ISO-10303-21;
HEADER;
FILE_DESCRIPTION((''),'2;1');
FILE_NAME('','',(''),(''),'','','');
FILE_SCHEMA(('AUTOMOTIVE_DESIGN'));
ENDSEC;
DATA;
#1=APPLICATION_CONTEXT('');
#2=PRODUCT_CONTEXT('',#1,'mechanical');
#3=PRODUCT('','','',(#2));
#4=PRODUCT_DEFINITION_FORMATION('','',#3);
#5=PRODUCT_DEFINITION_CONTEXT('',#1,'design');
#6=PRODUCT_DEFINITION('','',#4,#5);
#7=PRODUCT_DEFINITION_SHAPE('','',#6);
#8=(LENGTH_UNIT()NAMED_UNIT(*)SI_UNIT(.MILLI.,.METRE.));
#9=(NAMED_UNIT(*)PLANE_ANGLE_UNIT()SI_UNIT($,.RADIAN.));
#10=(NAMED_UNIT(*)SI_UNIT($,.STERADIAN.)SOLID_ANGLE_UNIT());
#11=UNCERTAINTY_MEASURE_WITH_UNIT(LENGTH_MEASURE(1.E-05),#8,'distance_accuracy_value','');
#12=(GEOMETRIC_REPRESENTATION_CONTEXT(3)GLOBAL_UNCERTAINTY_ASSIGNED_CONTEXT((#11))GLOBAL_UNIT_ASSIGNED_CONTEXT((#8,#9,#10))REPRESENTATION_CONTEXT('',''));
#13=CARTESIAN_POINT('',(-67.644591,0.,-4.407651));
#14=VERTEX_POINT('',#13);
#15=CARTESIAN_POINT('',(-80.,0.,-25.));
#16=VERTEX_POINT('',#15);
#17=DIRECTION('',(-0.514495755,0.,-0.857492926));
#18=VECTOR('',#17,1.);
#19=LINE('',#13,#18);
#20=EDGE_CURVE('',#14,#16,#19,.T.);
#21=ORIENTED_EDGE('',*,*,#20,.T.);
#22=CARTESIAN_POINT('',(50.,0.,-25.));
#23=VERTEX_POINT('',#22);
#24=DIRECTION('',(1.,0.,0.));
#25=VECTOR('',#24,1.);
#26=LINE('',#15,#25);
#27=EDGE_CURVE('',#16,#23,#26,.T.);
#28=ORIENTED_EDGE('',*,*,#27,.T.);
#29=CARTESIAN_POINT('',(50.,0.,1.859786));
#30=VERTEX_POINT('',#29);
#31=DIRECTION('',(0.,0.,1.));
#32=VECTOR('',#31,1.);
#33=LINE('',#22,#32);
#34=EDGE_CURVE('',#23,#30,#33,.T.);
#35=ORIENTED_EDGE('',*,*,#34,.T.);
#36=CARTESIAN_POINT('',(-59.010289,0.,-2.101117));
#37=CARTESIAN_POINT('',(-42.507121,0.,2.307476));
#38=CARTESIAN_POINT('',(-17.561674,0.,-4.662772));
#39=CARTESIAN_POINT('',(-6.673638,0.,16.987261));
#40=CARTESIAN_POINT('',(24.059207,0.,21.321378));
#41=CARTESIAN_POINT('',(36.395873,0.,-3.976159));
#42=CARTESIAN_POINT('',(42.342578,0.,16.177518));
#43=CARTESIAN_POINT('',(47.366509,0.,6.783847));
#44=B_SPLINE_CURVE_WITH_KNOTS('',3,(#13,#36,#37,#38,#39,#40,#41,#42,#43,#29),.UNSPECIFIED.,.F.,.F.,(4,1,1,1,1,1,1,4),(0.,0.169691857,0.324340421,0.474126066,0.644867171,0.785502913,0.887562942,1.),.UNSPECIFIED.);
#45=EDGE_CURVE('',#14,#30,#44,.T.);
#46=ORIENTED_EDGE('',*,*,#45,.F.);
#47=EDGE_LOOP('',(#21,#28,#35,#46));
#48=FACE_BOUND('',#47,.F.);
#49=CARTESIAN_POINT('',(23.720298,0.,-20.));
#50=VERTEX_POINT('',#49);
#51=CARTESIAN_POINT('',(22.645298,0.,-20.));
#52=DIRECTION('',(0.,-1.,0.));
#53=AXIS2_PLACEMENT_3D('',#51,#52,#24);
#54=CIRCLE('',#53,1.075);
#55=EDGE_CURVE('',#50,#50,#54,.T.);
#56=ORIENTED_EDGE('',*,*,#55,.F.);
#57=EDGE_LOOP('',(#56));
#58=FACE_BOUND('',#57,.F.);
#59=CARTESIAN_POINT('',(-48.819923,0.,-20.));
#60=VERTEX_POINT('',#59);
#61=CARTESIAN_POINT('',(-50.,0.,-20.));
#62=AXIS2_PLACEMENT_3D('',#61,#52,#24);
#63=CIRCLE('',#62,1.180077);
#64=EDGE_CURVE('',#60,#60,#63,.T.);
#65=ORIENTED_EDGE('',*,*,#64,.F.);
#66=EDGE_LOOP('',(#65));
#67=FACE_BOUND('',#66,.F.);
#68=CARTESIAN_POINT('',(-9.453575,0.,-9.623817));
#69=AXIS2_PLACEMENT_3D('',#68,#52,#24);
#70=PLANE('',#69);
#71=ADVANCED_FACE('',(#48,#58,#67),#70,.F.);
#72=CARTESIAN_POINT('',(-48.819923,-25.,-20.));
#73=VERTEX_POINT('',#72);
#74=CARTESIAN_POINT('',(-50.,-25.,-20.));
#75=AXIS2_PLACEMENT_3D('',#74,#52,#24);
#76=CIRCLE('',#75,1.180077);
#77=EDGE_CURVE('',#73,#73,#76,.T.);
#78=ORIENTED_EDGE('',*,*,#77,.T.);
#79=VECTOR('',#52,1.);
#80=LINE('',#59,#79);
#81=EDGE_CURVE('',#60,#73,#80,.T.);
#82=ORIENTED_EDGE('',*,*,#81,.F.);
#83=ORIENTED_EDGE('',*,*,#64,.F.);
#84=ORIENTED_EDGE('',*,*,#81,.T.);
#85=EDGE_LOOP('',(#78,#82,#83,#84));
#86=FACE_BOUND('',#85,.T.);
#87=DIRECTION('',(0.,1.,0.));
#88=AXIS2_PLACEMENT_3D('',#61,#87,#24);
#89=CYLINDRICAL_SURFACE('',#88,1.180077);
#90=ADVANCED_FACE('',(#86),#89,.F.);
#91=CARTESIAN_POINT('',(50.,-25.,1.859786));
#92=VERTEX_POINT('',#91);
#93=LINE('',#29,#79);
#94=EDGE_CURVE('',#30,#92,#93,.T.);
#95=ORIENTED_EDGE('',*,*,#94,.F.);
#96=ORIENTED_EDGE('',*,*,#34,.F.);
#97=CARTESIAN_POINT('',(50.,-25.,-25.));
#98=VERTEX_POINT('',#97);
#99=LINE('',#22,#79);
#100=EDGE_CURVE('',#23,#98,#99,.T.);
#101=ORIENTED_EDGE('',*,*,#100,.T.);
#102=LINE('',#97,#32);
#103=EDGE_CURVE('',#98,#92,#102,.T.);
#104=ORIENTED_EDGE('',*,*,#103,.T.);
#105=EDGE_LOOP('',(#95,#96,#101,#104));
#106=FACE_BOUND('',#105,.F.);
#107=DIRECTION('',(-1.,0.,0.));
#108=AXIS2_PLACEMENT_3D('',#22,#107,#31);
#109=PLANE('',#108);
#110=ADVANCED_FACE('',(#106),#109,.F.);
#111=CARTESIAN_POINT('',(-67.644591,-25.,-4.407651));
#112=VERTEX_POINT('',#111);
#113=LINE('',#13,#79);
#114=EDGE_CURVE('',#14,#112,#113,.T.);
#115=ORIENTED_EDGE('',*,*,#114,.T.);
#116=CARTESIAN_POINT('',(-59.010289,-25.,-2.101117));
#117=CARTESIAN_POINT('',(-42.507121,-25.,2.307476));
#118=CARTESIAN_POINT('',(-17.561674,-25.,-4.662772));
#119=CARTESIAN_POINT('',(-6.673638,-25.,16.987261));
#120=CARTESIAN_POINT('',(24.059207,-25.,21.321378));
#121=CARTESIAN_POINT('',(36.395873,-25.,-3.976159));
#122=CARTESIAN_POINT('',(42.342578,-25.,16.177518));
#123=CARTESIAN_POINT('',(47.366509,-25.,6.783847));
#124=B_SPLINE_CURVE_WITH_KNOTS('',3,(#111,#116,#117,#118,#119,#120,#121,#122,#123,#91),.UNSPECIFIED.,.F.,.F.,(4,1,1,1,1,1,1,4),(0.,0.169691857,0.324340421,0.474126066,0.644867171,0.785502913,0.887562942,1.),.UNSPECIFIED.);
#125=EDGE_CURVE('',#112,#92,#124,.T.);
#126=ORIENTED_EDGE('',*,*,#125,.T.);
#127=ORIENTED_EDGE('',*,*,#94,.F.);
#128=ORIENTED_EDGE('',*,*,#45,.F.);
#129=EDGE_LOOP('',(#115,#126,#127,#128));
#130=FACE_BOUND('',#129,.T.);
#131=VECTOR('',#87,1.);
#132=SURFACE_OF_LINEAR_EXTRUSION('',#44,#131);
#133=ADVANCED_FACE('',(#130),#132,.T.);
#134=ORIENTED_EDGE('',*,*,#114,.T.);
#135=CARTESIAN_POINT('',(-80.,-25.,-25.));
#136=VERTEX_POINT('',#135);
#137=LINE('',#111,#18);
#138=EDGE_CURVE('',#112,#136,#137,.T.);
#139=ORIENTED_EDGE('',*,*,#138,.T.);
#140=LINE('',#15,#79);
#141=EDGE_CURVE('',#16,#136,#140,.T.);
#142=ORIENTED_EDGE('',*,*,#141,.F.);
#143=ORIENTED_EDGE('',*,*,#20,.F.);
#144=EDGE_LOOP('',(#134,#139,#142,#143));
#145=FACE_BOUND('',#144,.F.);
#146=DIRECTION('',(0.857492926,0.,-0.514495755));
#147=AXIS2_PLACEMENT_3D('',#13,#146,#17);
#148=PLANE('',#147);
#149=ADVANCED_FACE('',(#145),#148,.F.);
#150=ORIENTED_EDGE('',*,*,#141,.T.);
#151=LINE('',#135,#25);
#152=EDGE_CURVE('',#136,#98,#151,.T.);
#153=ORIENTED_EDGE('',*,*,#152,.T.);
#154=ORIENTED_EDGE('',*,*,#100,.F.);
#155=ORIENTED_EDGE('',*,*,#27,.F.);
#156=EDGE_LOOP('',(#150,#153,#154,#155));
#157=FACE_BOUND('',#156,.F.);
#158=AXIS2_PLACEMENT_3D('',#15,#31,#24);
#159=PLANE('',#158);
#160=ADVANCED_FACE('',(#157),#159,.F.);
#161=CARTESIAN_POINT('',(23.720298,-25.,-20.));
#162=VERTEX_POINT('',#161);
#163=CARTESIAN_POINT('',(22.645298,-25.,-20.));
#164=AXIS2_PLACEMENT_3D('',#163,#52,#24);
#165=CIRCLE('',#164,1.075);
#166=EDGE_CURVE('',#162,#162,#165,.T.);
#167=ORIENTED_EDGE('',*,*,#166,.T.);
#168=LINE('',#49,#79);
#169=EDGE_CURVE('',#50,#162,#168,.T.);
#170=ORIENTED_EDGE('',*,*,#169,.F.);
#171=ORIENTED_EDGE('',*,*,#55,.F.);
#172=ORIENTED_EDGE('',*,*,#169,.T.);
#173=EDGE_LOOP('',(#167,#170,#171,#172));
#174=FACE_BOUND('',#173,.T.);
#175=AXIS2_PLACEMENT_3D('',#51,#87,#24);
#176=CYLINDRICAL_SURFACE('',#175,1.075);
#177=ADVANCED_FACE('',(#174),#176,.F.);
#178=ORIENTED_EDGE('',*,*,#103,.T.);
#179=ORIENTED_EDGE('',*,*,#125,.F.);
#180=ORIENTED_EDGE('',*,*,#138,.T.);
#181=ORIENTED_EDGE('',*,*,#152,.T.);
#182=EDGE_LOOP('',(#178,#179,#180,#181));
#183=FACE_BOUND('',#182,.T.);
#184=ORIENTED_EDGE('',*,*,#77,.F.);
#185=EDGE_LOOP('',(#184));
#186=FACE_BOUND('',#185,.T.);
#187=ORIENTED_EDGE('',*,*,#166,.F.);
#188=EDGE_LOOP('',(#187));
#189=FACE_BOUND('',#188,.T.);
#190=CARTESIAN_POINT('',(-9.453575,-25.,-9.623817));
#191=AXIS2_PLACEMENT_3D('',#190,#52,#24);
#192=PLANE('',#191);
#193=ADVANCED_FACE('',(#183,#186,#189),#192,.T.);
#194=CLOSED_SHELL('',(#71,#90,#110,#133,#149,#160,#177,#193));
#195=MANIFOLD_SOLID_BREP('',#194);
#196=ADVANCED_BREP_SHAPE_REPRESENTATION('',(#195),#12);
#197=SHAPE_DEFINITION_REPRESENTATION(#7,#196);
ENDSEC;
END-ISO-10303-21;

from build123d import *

# Parameters (mm, degrees)
F0_R     = 1.180077203
F0_R_2   = 1.075
F1_DEPTH = 25
F2_DEPTH = 25
F3_DEPTH = 156


# Not quite as in the source:
# - an extrude ends at something that could not be found from the text; its depth is read off the source's solid


with BuildPart() as f1:
    # F0 (on Front) → F1 (new body)
    with BuildSketch(Plane.XZ):
        with BuildLine():
            Line((-80, -25), (-50, -25))
            Line((-50, -25), (22.6452976465, -25))
            Line((22.6452976465, -25), (50, -25))
            Line((50, -25), (50, 1.8597864546))
            add(Edge.make_bspline(
                [(-67.6445906489, -4.4076510815), (-59.0102886259, -2.1011168124), (-42.5071210423, 2.3074759699), (-17.5616744307, -4.6627715865), (-6.6736378345, 16.9872606787), (24.059206598, 21.3213776549), (36.3958726575, -3.9761585615), (42.342577975, 16.1775178738), (47.3665093795, 6.7838472254), (50, 1.8597864546)],
                knots=[0, 0, 0, 0, 0.1696918572, 0.3243404215, 0.4741260658, 0.6448671709, 0.7855029125, 0.8875629417, 1, 1, 1, 1], degree=3))
            Line((-67.6445906489, -4.4076510815), (-80, -25))
        make_face()
        with Locations((-50, -20)):
            Circle(F0_R, mode=Mode.SUBTRACT)
        with Locations((22.6452976465, -20)):
            Circle(F0_R_2, mode=Mode.SUBTRACT)
    extrude(amount=F1_DEPTH)

    # F0 (on Front) → F2 (join)
    with BuildSketch(Plane.XZ):
        with BuildLine():
            Line((-80, -25), (-50, -25))
            Line((-50, -25), (22.6452976465, -25))
            Line((22.6452976465, -25), (50, -25))
            Line((50, -25), (50, 1.8597864546))
            add(Edge.make_bspline(
                [(-67.6445906489, -4.4076510815), (-59.0102886259, -2.1011168124), (-42.5071210423, 2.3074759699), (-17.5616744307, -4.6627715865), (-6.6736378345, 16.9872606787), (24.059206598, 21.3213776549), (36.3958726575, -3.9761585615), (42.342577975, 16.1775178738), (47.3665093795, 6.7838472254), (50, 1.8597864546)],
                knots=[0, 0, 0, 0, 0.1696918572, 0.3243404215, 0.4741260658, 0.6448671709, 0.7855029125, 0.8875629417, 1, 1, 1, 1], degree=3))
            Line((-67.6445906489, -4.4076510815), (-80, -25))
        make_face()
        with Locations((-50, -20)):
            Circle(F0_R, mode=Mode.SUBTRACT)
        with Locations((22.6452976465, -20)):
            Circle(F0_R_2, mode=Mode.SUBTRACT)
    extrude(amount=F2_DEPTH)

    # F0 (on Front) → F3 (cut, through all)
    with BuildSketch(Plane.XZ):
        with BuildLine():
            Line((-50, 25), (-67.6445906489, -4.4076510815))
            add(Edge.make_bspline(
                [(-67.6445906489, -4.4076510815), (-59.0102886259, -2.1011168124), (-42.5071210423, 2.3074759699), (-17.5616744307, -4.6627715865), (-6.6736378345, 16.9872606787), (24.059206598, 21.3213776549), (36.3958726575, -3.9761585615), (42.342577975, 16.1775178738), (47.3665093795, 6.7838472254), (50, 1.8597864546)],
                knots=[0, 0, 0, 0, 0.1696918572, 0.3243404215, 0.4741260658, 0.6448671709, 0.7855029125, 0.8875629417, 1, 1, 1, 1], degree=3))
            Line((50, 1.8597864546), (50, 25))
            Line((50, 25), (-50, 25))
        make_face()
    extrude(amount=-F3_DEPTH, mode=Mode.SUBTRACT)


solid = f1.part
